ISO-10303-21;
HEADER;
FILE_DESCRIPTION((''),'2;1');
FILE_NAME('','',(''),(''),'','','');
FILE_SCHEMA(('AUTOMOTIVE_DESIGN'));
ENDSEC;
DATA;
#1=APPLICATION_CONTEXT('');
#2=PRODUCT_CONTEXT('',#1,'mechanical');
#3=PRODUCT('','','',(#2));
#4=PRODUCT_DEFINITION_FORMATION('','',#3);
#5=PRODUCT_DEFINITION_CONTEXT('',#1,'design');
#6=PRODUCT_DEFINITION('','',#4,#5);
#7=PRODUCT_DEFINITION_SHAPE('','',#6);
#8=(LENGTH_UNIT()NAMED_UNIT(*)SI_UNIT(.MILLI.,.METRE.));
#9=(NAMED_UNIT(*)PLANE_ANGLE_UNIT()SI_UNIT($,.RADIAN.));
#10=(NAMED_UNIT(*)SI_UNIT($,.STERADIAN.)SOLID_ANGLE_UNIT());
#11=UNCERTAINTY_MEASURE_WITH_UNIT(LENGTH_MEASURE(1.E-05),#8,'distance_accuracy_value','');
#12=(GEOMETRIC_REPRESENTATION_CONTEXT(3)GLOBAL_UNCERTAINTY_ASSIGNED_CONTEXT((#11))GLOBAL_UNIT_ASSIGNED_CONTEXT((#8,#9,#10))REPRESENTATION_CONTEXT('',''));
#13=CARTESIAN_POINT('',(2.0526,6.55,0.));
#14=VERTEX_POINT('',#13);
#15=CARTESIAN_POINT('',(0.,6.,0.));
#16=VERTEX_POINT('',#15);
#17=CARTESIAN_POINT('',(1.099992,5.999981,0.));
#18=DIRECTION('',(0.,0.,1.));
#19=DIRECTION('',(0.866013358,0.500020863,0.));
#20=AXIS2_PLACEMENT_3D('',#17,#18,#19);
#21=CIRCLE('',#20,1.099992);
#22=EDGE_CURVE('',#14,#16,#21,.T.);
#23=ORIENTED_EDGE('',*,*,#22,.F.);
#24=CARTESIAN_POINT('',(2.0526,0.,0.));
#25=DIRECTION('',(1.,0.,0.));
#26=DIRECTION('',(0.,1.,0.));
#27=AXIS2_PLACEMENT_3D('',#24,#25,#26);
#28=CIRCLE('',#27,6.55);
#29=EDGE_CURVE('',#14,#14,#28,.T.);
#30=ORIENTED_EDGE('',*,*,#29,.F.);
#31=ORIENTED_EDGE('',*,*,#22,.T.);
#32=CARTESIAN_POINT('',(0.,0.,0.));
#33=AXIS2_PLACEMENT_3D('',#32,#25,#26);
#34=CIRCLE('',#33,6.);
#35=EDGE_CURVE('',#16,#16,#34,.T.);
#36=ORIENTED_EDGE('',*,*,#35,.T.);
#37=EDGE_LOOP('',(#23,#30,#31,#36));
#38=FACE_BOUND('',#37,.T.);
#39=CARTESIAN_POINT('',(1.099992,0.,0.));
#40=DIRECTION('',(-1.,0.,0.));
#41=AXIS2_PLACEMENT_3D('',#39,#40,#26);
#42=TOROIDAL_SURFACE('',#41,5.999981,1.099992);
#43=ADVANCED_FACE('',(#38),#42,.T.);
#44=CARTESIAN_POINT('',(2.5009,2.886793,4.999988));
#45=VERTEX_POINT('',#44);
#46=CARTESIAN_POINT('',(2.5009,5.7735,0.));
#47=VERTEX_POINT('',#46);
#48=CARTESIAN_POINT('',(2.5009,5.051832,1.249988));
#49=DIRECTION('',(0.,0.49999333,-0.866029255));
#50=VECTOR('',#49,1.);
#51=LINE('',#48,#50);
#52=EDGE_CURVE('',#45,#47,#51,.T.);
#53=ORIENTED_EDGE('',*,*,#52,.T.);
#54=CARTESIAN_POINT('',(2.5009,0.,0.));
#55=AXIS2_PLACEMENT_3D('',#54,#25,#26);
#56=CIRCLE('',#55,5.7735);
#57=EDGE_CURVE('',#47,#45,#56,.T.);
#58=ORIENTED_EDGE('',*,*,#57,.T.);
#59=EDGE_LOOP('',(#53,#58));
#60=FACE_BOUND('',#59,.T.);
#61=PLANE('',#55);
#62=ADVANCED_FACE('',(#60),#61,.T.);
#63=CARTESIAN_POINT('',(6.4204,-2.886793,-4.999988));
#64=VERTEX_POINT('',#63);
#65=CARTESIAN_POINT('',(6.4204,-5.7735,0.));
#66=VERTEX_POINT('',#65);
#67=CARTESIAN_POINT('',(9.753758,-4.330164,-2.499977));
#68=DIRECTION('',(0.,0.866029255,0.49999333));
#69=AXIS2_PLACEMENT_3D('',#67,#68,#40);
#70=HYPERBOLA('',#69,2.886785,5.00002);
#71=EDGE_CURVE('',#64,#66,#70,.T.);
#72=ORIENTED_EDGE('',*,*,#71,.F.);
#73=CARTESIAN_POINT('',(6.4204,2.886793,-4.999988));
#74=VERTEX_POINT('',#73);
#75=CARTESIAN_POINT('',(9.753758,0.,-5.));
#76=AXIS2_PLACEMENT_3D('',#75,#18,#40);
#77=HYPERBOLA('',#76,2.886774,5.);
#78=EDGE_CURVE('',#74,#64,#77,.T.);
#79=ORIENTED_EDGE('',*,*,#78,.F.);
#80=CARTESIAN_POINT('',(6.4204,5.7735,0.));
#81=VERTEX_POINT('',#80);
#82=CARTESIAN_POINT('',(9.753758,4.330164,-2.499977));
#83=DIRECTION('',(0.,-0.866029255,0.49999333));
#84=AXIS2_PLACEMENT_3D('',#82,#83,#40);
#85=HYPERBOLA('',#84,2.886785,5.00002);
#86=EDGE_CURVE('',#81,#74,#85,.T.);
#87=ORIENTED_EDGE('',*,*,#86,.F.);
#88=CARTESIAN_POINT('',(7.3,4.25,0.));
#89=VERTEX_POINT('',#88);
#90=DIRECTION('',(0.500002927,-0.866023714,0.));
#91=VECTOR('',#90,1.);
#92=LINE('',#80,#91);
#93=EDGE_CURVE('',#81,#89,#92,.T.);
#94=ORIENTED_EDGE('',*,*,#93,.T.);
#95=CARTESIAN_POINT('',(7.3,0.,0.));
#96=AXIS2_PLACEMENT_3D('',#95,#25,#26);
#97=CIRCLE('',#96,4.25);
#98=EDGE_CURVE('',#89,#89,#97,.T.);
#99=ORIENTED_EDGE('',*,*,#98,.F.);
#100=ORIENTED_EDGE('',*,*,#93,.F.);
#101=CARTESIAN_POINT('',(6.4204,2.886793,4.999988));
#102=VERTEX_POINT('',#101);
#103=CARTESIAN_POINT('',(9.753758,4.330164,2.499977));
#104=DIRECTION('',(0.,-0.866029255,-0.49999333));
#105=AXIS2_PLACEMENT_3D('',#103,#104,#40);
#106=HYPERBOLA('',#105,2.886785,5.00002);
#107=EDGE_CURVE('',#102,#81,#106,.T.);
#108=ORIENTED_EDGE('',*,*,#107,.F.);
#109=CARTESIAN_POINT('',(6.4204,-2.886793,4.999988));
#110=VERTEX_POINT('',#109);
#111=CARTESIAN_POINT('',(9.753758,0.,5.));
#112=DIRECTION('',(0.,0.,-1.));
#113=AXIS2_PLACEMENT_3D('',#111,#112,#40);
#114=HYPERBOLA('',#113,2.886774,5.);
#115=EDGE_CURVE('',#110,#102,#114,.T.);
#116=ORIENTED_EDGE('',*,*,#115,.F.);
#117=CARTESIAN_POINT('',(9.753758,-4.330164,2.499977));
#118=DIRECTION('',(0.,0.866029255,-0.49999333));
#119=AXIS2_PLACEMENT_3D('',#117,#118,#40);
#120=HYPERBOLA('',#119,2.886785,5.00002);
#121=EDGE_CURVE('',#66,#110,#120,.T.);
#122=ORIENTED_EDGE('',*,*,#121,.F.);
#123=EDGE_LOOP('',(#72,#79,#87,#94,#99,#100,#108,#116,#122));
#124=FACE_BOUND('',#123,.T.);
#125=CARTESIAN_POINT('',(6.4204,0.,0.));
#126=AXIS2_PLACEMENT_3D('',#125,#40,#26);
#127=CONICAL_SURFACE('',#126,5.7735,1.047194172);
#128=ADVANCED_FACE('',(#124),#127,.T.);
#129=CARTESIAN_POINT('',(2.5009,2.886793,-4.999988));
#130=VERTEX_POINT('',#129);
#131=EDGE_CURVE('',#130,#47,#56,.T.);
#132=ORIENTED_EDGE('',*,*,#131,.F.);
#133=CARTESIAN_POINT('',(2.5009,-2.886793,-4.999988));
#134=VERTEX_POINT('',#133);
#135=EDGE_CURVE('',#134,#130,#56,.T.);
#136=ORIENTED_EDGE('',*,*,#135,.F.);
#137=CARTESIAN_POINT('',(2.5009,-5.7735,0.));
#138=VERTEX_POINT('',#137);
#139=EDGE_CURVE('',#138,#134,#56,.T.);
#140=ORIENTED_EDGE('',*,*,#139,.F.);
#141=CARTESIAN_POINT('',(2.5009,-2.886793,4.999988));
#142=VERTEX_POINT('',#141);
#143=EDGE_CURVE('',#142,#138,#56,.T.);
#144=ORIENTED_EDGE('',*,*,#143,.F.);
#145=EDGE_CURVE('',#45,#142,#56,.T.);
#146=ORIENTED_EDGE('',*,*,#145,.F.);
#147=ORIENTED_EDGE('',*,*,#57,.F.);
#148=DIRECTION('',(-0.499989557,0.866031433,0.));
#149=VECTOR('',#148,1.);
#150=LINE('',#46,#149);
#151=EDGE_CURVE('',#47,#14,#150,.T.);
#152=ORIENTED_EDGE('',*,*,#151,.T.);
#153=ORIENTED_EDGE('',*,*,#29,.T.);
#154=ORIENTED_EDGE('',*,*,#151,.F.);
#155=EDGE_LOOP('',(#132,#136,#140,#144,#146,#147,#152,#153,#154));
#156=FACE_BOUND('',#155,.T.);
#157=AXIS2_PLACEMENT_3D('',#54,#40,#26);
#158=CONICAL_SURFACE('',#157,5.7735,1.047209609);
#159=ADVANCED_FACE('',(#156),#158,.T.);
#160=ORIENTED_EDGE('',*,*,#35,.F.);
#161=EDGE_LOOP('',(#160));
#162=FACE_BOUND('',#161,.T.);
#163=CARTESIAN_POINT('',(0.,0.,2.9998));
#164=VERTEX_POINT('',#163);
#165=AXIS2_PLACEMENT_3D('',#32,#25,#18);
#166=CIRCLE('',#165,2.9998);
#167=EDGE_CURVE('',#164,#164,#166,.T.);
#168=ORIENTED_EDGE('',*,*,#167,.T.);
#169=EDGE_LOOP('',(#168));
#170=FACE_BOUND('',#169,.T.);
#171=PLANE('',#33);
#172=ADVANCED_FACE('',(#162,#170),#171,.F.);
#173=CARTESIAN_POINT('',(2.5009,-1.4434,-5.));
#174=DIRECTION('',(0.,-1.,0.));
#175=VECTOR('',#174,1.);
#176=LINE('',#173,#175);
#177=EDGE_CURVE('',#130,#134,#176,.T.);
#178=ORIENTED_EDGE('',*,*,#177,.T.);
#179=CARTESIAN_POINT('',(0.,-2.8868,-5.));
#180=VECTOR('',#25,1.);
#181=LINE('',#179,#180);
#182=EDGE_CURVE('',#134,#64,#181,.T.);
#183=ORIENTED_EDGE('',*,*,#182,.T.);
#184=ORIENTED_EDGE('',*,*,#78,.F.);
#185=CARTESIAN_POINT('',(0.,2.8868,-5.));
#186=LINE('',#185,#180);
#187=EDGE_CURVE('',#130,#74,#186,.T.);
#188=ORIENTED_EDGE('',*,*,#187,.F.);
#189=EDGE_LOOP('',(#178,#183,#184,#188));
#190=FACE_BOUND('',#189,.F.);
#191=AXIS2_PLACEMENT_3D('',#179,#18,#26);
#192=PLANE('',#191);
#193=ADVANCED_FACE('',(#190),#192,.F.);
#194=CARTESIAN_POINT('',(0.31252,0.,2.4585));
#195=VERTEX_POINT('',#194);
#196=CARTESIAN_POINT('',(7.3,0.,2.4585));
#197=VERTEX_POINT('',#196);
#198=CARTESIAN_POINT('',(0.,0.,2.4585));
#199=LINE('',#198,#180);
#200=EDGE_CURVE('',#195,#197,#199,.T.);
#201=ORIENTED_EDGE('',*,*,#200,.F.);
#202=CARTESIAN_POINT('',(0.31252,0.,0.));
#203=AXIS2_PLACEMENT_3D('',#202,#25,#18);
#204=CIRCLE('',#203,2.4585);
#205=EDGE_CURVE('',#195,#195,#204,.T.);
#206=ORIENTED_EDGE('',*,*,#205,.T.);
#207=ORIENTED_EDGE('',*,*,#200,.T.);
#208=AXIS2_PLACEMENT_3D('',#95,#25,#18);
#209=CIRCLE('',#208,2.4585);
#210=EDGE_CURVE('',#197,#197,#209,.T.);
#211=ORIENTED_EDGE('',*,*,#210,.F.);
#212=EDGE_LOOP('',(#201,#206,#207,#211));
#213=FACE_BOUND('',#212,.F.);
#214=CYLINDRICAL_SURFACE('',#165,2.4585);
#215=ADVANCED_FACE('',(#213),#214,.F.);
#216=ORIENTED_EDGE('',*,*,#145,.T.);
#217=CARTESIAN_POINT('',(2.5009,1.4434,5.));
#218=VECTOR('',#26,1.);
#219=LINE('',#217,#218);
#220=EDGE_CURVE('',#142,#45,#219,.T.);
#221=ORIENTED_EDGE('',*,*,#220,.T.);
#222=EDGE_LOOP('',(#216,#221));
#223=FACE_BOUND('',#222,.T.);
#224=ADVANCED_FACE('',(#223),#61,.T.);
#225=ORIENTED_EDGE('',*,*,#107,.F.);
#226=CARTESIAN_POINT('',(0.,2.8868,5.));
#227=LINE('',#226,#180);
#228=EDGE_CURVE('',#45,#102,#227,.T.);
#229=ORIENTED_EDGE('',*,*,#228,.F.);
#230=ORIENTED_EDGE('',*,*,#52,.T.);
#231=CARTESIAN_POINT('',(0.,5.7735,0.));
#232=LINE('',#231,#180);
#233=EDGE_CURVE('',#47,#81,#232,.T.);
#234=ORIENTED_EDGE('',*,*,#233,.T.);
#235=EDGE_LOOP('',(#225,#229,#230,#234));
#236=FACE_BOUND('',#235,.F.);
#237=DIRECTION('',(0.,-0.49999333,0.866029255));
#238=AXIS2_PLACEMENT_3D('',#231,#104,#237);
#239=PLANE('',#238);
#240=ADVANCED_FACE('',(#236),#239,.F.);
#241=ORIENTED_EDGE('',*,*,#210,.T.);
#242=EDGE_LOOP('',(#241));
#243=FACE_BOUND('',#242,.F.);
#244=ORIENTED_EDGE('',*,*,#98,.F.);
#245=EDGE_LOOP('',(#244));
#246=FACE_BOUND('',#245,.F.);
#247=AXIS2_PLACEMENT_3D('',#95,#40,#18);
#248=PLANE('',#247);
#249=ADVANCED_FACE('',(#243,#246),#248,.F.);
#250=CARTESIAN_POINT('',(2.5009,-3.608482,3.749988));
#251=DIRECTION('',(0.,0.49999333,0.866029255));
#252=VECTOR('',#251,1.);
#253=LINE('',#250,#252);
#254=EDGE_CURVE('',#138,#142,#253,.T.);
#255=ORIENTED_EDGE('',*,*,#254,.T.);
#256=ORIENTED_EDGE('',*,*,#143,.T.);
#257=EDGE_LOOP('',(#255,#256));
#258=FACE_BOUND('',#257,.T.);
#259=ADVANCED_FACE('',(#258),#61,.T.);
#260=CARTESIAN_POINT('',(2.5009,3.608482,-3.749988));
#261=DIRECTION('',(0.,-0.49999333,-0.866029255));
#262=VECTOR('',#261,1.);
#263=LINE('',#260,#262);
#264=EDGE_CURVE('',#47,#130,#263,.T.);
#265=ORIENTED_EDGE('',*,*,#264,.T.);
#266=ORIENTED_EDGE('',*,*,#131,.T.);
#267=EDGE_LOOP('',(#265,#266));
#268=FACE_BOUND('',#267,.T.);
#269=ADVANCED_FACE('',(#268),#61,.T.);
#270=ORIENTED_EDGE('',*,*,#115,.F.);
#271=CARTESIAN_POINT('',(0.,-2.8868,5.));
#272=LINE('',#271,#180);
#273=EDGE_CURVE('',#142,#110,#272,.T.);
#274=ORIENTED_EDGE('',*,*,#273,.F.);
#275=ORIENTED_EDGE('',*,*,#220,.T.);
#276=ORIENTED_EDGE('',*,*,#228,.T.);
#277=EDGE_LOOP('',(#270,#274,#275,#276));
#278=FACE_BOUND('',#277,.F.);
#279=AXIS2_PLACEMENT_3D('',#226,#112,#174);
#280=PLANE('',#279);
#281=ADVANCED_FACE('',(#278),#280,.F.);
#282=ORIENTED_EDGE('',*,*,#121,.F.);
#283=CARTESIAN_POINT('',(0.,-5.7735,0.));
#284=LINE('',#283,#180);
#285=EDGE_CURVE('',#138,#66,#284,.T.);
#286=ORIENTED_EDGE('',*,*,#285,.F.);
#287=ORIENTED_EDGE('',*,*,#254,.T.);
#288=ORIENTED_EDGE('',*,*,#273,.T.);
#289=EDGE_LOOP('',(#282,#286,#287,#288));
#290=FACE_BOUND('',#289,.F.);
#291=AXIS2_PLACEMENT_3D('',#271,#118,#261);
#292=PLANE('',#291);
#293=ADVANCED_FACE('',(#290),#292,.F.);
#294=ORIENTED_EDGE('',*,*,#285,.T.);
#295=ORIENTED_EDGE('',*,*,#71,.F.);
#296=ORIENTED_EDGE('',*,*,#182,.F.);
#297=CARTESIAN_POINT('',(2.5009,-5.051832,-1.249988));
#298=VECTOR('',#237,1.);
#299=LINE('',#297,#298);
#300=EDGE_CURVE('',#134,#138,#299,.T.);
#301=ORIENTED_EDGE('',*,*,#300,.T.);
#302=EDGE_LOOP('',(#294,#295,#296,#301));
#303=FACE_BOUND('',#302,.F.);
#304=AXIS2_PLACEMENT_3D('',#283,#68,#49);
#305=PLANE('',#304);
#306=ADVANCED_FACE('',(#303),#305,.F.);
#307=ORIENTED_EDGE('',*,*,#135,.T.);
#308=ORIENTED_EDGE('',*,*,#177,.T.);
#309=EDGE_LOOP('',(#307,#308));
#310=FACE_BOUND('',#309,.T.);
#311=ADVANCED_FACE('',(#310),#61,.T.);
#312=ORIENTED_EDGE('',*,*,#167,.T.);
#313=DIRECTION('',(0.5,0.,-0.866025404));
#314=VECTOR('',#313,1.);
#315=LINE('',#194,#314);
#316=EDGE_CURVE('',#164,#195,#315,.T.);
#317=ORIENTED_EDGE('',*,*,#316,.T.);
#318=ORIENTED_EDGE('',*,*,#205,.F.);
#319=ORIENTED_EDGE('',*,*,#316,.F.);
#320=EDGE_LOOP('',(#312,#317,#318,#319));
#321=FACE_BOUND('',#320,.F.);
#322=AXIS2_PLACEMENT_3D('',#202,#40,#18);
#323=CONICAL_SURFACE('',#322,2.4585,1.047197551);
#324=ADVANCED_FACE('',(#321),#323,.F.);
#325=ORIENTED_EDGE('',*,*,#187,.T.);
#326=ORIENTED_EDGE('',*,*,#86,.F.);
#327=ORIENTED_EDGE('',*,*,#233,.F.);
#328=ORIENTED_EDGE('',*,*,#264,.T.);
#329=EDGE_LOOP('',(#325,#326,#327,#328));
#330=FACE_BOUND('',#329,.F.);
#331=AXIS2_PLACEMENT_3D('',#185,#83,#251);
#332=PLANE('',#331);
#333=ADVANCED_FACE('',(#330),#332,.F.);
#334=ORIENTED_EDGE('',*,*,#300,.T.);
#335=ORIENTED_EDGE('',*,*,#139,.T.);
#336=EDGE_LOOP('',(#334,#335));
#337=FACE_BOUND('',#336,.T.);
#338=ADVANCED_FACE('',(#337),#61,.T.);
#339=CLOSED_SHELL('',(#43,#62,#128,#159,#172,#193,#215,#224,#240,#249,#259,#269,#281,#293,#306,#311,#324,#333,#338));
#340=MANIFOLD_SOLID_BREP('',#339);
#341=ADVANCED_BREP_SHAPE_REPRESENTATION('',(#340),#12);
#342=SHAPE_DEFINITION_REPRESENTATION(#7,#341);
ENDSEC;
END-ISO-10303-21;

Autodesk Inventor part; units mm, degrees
ref_plane "YZ Plane" through (0, 0, 0) normal (1, 0, 0) x (0, 1, 0)
ref_plane "XZ Plane" through (0, 0, 0) normal (0, 1, 0) x (-1, 0, 0)
sketch "Esquisse1" plane through (0, 0, 0) normal (0, 0, 1) x (1, 0, 0)
  line L0 (-1.7132, 0) -> (8.8022, 0) projected
  line L1 (2.5009, 5.7735) -> (2.0526, 6.55)
  line L2 (2.5009, 5.7735) -> (7.3, 5.7735) construction
  line L3 (7.3, 5.7735) -> (7.3, 0) construction
  arc A0 (2.0526, 6.55) -> (0, 6) centre (1.1, 6) ccw
  line L4 (2.5009, 5.7735) -> (2.5009, 0)
  line L5 (0, -1.4675) -> (0, 8.805) projected
  point P0 (0, 0)
  dimension "d2" = 11.547
  dimension "d4" = 14.2
  dimension "d5" = 1.1
  dimension "d15" = 7.3
  dimension "d16" = 30
revolve "Anneau" add sketch "Esquisse1" angle 360 about axis through (-10, 0, 0) along (1, 0, 0)
sketch "Esquisse2" plane through (0, 0, 0) normal (-1, 0, 0) x (0, 0, 1)
  circle A0 centre (0, 0) radius 4.9
  line L0 (-5, -2.8868) -> (-5, 2.8868)
  line L1 (-5, 2.8868) -> (0, 5.7735)
  line L2 (0, 5.7735) -> (5, 2.8868)
  line L3 (5, 2.8868) -> (5, -2.8868)
  line L4 (5, -2.8868) -> (0, -5.7735)
  line L5 (0, -5.7735) -> (-5, -2.8868)
  circle A1 centre (0, 0) radius 6 projected
  dimension "d6" = 11.547
extrude "Corps" add sketch "Esquisse2" against normal blind 7.3 contours A0 | L0 L1 L2 L3 L4 L5
sketch "Esquisse3" plane through (0, 0, 0) normal (0, 0, 1) x (1, 0, 0)
  line L0 (2.5009, 5.7735) -> (7.3, 5.7735) projected
  line L1 (7.3, 2.8868) -> (7.3, 5.7735) projected
  line L2 (0, -6) -> (0, 6) projected
  line L3 (-1.46, 0) -> (8.76, 0) projected
  line L4 (6.4204, 5.7735) -> (7.3, 4.25)
  dimension "d10" = 30
  dimension "d11" = 8.5
revolve "Chanfrein1" cut sketch "Esquisse3" angle 360 about axis through (-10, 0, 0) along (1, 0, 0)
sketch "Esquisse4" plane through (0, 0, 0) normal (-1, 0, 0) x (0, 0, 1)
  line L0 (-9.94, 0) -> (9.94, 0) projected
  line L1 (0, 9.94) -> (0, -9.94) projected
  point P0 (0, 0)
hole "Filetage" at (0, 0, 0) direction (1, 0, 0) diameter 4.917 end through all thread size "M6x1" class "6H" standard "ANSI Metric M Profile"
chamfer "Chanfrein2" distance 0.5413 angle 30 1 edges at (0, 0, -2.4585) measured on face at (0, 4.7554, -0.5774)
ref_plane "Work Plane1" through (21.3675, 0, 0) normal (0, 0, -1) x (-1, 0, 0)
equation "\"d2\" = 1.1547 * SW"
equation "\"d4\" = LADI"
equation "\"d5\" = PHH"
equation "\"d15\" = KOH"
equation "\"d16\" = KEWI"
equation "\"d6\" = 1.1547 * SW"
equation "\"d7\" = KOH"
equation "\"d10\" = ANG1"
equation "\"d11\" = SW0"
equation "\"d12\" = -0.5 * GD1 + 0.5 * NND"
equation "\"d42\" = -0.5 * GD1 + 0.5 * NND"
equation "\"ANG1\" = 30deg"
equation "\"KEWI\" = 30deg"
equation "\"NND\" = 6"
equation "\"LADI\" = 14.2"
equation "\"PHH\" = 1.1"
equation "\"KOH\" = 7.3"
equation "\"SW0\" = 0.85 * SW"
equation "\"d1\" = LADI"
equation "\"d3\" = PHH"
equation "\"GUL\" = 0.541266 * PTC"
equation "\"THREADDIA\" = 6"
equation "\"TOA\" = 30deg"
equation "\"PTC\" = 1"
equation "\"GAL\" = 0.541266 * PTC"
equation "\"E0\" = 1.155 * SW"
equation "\"SW\" = 10"
equation "\"GD1\" = 4.917468"
properties part number "ANSI B18.16.3M - M6 x 1 Type de métal" material "Acier, doux"
